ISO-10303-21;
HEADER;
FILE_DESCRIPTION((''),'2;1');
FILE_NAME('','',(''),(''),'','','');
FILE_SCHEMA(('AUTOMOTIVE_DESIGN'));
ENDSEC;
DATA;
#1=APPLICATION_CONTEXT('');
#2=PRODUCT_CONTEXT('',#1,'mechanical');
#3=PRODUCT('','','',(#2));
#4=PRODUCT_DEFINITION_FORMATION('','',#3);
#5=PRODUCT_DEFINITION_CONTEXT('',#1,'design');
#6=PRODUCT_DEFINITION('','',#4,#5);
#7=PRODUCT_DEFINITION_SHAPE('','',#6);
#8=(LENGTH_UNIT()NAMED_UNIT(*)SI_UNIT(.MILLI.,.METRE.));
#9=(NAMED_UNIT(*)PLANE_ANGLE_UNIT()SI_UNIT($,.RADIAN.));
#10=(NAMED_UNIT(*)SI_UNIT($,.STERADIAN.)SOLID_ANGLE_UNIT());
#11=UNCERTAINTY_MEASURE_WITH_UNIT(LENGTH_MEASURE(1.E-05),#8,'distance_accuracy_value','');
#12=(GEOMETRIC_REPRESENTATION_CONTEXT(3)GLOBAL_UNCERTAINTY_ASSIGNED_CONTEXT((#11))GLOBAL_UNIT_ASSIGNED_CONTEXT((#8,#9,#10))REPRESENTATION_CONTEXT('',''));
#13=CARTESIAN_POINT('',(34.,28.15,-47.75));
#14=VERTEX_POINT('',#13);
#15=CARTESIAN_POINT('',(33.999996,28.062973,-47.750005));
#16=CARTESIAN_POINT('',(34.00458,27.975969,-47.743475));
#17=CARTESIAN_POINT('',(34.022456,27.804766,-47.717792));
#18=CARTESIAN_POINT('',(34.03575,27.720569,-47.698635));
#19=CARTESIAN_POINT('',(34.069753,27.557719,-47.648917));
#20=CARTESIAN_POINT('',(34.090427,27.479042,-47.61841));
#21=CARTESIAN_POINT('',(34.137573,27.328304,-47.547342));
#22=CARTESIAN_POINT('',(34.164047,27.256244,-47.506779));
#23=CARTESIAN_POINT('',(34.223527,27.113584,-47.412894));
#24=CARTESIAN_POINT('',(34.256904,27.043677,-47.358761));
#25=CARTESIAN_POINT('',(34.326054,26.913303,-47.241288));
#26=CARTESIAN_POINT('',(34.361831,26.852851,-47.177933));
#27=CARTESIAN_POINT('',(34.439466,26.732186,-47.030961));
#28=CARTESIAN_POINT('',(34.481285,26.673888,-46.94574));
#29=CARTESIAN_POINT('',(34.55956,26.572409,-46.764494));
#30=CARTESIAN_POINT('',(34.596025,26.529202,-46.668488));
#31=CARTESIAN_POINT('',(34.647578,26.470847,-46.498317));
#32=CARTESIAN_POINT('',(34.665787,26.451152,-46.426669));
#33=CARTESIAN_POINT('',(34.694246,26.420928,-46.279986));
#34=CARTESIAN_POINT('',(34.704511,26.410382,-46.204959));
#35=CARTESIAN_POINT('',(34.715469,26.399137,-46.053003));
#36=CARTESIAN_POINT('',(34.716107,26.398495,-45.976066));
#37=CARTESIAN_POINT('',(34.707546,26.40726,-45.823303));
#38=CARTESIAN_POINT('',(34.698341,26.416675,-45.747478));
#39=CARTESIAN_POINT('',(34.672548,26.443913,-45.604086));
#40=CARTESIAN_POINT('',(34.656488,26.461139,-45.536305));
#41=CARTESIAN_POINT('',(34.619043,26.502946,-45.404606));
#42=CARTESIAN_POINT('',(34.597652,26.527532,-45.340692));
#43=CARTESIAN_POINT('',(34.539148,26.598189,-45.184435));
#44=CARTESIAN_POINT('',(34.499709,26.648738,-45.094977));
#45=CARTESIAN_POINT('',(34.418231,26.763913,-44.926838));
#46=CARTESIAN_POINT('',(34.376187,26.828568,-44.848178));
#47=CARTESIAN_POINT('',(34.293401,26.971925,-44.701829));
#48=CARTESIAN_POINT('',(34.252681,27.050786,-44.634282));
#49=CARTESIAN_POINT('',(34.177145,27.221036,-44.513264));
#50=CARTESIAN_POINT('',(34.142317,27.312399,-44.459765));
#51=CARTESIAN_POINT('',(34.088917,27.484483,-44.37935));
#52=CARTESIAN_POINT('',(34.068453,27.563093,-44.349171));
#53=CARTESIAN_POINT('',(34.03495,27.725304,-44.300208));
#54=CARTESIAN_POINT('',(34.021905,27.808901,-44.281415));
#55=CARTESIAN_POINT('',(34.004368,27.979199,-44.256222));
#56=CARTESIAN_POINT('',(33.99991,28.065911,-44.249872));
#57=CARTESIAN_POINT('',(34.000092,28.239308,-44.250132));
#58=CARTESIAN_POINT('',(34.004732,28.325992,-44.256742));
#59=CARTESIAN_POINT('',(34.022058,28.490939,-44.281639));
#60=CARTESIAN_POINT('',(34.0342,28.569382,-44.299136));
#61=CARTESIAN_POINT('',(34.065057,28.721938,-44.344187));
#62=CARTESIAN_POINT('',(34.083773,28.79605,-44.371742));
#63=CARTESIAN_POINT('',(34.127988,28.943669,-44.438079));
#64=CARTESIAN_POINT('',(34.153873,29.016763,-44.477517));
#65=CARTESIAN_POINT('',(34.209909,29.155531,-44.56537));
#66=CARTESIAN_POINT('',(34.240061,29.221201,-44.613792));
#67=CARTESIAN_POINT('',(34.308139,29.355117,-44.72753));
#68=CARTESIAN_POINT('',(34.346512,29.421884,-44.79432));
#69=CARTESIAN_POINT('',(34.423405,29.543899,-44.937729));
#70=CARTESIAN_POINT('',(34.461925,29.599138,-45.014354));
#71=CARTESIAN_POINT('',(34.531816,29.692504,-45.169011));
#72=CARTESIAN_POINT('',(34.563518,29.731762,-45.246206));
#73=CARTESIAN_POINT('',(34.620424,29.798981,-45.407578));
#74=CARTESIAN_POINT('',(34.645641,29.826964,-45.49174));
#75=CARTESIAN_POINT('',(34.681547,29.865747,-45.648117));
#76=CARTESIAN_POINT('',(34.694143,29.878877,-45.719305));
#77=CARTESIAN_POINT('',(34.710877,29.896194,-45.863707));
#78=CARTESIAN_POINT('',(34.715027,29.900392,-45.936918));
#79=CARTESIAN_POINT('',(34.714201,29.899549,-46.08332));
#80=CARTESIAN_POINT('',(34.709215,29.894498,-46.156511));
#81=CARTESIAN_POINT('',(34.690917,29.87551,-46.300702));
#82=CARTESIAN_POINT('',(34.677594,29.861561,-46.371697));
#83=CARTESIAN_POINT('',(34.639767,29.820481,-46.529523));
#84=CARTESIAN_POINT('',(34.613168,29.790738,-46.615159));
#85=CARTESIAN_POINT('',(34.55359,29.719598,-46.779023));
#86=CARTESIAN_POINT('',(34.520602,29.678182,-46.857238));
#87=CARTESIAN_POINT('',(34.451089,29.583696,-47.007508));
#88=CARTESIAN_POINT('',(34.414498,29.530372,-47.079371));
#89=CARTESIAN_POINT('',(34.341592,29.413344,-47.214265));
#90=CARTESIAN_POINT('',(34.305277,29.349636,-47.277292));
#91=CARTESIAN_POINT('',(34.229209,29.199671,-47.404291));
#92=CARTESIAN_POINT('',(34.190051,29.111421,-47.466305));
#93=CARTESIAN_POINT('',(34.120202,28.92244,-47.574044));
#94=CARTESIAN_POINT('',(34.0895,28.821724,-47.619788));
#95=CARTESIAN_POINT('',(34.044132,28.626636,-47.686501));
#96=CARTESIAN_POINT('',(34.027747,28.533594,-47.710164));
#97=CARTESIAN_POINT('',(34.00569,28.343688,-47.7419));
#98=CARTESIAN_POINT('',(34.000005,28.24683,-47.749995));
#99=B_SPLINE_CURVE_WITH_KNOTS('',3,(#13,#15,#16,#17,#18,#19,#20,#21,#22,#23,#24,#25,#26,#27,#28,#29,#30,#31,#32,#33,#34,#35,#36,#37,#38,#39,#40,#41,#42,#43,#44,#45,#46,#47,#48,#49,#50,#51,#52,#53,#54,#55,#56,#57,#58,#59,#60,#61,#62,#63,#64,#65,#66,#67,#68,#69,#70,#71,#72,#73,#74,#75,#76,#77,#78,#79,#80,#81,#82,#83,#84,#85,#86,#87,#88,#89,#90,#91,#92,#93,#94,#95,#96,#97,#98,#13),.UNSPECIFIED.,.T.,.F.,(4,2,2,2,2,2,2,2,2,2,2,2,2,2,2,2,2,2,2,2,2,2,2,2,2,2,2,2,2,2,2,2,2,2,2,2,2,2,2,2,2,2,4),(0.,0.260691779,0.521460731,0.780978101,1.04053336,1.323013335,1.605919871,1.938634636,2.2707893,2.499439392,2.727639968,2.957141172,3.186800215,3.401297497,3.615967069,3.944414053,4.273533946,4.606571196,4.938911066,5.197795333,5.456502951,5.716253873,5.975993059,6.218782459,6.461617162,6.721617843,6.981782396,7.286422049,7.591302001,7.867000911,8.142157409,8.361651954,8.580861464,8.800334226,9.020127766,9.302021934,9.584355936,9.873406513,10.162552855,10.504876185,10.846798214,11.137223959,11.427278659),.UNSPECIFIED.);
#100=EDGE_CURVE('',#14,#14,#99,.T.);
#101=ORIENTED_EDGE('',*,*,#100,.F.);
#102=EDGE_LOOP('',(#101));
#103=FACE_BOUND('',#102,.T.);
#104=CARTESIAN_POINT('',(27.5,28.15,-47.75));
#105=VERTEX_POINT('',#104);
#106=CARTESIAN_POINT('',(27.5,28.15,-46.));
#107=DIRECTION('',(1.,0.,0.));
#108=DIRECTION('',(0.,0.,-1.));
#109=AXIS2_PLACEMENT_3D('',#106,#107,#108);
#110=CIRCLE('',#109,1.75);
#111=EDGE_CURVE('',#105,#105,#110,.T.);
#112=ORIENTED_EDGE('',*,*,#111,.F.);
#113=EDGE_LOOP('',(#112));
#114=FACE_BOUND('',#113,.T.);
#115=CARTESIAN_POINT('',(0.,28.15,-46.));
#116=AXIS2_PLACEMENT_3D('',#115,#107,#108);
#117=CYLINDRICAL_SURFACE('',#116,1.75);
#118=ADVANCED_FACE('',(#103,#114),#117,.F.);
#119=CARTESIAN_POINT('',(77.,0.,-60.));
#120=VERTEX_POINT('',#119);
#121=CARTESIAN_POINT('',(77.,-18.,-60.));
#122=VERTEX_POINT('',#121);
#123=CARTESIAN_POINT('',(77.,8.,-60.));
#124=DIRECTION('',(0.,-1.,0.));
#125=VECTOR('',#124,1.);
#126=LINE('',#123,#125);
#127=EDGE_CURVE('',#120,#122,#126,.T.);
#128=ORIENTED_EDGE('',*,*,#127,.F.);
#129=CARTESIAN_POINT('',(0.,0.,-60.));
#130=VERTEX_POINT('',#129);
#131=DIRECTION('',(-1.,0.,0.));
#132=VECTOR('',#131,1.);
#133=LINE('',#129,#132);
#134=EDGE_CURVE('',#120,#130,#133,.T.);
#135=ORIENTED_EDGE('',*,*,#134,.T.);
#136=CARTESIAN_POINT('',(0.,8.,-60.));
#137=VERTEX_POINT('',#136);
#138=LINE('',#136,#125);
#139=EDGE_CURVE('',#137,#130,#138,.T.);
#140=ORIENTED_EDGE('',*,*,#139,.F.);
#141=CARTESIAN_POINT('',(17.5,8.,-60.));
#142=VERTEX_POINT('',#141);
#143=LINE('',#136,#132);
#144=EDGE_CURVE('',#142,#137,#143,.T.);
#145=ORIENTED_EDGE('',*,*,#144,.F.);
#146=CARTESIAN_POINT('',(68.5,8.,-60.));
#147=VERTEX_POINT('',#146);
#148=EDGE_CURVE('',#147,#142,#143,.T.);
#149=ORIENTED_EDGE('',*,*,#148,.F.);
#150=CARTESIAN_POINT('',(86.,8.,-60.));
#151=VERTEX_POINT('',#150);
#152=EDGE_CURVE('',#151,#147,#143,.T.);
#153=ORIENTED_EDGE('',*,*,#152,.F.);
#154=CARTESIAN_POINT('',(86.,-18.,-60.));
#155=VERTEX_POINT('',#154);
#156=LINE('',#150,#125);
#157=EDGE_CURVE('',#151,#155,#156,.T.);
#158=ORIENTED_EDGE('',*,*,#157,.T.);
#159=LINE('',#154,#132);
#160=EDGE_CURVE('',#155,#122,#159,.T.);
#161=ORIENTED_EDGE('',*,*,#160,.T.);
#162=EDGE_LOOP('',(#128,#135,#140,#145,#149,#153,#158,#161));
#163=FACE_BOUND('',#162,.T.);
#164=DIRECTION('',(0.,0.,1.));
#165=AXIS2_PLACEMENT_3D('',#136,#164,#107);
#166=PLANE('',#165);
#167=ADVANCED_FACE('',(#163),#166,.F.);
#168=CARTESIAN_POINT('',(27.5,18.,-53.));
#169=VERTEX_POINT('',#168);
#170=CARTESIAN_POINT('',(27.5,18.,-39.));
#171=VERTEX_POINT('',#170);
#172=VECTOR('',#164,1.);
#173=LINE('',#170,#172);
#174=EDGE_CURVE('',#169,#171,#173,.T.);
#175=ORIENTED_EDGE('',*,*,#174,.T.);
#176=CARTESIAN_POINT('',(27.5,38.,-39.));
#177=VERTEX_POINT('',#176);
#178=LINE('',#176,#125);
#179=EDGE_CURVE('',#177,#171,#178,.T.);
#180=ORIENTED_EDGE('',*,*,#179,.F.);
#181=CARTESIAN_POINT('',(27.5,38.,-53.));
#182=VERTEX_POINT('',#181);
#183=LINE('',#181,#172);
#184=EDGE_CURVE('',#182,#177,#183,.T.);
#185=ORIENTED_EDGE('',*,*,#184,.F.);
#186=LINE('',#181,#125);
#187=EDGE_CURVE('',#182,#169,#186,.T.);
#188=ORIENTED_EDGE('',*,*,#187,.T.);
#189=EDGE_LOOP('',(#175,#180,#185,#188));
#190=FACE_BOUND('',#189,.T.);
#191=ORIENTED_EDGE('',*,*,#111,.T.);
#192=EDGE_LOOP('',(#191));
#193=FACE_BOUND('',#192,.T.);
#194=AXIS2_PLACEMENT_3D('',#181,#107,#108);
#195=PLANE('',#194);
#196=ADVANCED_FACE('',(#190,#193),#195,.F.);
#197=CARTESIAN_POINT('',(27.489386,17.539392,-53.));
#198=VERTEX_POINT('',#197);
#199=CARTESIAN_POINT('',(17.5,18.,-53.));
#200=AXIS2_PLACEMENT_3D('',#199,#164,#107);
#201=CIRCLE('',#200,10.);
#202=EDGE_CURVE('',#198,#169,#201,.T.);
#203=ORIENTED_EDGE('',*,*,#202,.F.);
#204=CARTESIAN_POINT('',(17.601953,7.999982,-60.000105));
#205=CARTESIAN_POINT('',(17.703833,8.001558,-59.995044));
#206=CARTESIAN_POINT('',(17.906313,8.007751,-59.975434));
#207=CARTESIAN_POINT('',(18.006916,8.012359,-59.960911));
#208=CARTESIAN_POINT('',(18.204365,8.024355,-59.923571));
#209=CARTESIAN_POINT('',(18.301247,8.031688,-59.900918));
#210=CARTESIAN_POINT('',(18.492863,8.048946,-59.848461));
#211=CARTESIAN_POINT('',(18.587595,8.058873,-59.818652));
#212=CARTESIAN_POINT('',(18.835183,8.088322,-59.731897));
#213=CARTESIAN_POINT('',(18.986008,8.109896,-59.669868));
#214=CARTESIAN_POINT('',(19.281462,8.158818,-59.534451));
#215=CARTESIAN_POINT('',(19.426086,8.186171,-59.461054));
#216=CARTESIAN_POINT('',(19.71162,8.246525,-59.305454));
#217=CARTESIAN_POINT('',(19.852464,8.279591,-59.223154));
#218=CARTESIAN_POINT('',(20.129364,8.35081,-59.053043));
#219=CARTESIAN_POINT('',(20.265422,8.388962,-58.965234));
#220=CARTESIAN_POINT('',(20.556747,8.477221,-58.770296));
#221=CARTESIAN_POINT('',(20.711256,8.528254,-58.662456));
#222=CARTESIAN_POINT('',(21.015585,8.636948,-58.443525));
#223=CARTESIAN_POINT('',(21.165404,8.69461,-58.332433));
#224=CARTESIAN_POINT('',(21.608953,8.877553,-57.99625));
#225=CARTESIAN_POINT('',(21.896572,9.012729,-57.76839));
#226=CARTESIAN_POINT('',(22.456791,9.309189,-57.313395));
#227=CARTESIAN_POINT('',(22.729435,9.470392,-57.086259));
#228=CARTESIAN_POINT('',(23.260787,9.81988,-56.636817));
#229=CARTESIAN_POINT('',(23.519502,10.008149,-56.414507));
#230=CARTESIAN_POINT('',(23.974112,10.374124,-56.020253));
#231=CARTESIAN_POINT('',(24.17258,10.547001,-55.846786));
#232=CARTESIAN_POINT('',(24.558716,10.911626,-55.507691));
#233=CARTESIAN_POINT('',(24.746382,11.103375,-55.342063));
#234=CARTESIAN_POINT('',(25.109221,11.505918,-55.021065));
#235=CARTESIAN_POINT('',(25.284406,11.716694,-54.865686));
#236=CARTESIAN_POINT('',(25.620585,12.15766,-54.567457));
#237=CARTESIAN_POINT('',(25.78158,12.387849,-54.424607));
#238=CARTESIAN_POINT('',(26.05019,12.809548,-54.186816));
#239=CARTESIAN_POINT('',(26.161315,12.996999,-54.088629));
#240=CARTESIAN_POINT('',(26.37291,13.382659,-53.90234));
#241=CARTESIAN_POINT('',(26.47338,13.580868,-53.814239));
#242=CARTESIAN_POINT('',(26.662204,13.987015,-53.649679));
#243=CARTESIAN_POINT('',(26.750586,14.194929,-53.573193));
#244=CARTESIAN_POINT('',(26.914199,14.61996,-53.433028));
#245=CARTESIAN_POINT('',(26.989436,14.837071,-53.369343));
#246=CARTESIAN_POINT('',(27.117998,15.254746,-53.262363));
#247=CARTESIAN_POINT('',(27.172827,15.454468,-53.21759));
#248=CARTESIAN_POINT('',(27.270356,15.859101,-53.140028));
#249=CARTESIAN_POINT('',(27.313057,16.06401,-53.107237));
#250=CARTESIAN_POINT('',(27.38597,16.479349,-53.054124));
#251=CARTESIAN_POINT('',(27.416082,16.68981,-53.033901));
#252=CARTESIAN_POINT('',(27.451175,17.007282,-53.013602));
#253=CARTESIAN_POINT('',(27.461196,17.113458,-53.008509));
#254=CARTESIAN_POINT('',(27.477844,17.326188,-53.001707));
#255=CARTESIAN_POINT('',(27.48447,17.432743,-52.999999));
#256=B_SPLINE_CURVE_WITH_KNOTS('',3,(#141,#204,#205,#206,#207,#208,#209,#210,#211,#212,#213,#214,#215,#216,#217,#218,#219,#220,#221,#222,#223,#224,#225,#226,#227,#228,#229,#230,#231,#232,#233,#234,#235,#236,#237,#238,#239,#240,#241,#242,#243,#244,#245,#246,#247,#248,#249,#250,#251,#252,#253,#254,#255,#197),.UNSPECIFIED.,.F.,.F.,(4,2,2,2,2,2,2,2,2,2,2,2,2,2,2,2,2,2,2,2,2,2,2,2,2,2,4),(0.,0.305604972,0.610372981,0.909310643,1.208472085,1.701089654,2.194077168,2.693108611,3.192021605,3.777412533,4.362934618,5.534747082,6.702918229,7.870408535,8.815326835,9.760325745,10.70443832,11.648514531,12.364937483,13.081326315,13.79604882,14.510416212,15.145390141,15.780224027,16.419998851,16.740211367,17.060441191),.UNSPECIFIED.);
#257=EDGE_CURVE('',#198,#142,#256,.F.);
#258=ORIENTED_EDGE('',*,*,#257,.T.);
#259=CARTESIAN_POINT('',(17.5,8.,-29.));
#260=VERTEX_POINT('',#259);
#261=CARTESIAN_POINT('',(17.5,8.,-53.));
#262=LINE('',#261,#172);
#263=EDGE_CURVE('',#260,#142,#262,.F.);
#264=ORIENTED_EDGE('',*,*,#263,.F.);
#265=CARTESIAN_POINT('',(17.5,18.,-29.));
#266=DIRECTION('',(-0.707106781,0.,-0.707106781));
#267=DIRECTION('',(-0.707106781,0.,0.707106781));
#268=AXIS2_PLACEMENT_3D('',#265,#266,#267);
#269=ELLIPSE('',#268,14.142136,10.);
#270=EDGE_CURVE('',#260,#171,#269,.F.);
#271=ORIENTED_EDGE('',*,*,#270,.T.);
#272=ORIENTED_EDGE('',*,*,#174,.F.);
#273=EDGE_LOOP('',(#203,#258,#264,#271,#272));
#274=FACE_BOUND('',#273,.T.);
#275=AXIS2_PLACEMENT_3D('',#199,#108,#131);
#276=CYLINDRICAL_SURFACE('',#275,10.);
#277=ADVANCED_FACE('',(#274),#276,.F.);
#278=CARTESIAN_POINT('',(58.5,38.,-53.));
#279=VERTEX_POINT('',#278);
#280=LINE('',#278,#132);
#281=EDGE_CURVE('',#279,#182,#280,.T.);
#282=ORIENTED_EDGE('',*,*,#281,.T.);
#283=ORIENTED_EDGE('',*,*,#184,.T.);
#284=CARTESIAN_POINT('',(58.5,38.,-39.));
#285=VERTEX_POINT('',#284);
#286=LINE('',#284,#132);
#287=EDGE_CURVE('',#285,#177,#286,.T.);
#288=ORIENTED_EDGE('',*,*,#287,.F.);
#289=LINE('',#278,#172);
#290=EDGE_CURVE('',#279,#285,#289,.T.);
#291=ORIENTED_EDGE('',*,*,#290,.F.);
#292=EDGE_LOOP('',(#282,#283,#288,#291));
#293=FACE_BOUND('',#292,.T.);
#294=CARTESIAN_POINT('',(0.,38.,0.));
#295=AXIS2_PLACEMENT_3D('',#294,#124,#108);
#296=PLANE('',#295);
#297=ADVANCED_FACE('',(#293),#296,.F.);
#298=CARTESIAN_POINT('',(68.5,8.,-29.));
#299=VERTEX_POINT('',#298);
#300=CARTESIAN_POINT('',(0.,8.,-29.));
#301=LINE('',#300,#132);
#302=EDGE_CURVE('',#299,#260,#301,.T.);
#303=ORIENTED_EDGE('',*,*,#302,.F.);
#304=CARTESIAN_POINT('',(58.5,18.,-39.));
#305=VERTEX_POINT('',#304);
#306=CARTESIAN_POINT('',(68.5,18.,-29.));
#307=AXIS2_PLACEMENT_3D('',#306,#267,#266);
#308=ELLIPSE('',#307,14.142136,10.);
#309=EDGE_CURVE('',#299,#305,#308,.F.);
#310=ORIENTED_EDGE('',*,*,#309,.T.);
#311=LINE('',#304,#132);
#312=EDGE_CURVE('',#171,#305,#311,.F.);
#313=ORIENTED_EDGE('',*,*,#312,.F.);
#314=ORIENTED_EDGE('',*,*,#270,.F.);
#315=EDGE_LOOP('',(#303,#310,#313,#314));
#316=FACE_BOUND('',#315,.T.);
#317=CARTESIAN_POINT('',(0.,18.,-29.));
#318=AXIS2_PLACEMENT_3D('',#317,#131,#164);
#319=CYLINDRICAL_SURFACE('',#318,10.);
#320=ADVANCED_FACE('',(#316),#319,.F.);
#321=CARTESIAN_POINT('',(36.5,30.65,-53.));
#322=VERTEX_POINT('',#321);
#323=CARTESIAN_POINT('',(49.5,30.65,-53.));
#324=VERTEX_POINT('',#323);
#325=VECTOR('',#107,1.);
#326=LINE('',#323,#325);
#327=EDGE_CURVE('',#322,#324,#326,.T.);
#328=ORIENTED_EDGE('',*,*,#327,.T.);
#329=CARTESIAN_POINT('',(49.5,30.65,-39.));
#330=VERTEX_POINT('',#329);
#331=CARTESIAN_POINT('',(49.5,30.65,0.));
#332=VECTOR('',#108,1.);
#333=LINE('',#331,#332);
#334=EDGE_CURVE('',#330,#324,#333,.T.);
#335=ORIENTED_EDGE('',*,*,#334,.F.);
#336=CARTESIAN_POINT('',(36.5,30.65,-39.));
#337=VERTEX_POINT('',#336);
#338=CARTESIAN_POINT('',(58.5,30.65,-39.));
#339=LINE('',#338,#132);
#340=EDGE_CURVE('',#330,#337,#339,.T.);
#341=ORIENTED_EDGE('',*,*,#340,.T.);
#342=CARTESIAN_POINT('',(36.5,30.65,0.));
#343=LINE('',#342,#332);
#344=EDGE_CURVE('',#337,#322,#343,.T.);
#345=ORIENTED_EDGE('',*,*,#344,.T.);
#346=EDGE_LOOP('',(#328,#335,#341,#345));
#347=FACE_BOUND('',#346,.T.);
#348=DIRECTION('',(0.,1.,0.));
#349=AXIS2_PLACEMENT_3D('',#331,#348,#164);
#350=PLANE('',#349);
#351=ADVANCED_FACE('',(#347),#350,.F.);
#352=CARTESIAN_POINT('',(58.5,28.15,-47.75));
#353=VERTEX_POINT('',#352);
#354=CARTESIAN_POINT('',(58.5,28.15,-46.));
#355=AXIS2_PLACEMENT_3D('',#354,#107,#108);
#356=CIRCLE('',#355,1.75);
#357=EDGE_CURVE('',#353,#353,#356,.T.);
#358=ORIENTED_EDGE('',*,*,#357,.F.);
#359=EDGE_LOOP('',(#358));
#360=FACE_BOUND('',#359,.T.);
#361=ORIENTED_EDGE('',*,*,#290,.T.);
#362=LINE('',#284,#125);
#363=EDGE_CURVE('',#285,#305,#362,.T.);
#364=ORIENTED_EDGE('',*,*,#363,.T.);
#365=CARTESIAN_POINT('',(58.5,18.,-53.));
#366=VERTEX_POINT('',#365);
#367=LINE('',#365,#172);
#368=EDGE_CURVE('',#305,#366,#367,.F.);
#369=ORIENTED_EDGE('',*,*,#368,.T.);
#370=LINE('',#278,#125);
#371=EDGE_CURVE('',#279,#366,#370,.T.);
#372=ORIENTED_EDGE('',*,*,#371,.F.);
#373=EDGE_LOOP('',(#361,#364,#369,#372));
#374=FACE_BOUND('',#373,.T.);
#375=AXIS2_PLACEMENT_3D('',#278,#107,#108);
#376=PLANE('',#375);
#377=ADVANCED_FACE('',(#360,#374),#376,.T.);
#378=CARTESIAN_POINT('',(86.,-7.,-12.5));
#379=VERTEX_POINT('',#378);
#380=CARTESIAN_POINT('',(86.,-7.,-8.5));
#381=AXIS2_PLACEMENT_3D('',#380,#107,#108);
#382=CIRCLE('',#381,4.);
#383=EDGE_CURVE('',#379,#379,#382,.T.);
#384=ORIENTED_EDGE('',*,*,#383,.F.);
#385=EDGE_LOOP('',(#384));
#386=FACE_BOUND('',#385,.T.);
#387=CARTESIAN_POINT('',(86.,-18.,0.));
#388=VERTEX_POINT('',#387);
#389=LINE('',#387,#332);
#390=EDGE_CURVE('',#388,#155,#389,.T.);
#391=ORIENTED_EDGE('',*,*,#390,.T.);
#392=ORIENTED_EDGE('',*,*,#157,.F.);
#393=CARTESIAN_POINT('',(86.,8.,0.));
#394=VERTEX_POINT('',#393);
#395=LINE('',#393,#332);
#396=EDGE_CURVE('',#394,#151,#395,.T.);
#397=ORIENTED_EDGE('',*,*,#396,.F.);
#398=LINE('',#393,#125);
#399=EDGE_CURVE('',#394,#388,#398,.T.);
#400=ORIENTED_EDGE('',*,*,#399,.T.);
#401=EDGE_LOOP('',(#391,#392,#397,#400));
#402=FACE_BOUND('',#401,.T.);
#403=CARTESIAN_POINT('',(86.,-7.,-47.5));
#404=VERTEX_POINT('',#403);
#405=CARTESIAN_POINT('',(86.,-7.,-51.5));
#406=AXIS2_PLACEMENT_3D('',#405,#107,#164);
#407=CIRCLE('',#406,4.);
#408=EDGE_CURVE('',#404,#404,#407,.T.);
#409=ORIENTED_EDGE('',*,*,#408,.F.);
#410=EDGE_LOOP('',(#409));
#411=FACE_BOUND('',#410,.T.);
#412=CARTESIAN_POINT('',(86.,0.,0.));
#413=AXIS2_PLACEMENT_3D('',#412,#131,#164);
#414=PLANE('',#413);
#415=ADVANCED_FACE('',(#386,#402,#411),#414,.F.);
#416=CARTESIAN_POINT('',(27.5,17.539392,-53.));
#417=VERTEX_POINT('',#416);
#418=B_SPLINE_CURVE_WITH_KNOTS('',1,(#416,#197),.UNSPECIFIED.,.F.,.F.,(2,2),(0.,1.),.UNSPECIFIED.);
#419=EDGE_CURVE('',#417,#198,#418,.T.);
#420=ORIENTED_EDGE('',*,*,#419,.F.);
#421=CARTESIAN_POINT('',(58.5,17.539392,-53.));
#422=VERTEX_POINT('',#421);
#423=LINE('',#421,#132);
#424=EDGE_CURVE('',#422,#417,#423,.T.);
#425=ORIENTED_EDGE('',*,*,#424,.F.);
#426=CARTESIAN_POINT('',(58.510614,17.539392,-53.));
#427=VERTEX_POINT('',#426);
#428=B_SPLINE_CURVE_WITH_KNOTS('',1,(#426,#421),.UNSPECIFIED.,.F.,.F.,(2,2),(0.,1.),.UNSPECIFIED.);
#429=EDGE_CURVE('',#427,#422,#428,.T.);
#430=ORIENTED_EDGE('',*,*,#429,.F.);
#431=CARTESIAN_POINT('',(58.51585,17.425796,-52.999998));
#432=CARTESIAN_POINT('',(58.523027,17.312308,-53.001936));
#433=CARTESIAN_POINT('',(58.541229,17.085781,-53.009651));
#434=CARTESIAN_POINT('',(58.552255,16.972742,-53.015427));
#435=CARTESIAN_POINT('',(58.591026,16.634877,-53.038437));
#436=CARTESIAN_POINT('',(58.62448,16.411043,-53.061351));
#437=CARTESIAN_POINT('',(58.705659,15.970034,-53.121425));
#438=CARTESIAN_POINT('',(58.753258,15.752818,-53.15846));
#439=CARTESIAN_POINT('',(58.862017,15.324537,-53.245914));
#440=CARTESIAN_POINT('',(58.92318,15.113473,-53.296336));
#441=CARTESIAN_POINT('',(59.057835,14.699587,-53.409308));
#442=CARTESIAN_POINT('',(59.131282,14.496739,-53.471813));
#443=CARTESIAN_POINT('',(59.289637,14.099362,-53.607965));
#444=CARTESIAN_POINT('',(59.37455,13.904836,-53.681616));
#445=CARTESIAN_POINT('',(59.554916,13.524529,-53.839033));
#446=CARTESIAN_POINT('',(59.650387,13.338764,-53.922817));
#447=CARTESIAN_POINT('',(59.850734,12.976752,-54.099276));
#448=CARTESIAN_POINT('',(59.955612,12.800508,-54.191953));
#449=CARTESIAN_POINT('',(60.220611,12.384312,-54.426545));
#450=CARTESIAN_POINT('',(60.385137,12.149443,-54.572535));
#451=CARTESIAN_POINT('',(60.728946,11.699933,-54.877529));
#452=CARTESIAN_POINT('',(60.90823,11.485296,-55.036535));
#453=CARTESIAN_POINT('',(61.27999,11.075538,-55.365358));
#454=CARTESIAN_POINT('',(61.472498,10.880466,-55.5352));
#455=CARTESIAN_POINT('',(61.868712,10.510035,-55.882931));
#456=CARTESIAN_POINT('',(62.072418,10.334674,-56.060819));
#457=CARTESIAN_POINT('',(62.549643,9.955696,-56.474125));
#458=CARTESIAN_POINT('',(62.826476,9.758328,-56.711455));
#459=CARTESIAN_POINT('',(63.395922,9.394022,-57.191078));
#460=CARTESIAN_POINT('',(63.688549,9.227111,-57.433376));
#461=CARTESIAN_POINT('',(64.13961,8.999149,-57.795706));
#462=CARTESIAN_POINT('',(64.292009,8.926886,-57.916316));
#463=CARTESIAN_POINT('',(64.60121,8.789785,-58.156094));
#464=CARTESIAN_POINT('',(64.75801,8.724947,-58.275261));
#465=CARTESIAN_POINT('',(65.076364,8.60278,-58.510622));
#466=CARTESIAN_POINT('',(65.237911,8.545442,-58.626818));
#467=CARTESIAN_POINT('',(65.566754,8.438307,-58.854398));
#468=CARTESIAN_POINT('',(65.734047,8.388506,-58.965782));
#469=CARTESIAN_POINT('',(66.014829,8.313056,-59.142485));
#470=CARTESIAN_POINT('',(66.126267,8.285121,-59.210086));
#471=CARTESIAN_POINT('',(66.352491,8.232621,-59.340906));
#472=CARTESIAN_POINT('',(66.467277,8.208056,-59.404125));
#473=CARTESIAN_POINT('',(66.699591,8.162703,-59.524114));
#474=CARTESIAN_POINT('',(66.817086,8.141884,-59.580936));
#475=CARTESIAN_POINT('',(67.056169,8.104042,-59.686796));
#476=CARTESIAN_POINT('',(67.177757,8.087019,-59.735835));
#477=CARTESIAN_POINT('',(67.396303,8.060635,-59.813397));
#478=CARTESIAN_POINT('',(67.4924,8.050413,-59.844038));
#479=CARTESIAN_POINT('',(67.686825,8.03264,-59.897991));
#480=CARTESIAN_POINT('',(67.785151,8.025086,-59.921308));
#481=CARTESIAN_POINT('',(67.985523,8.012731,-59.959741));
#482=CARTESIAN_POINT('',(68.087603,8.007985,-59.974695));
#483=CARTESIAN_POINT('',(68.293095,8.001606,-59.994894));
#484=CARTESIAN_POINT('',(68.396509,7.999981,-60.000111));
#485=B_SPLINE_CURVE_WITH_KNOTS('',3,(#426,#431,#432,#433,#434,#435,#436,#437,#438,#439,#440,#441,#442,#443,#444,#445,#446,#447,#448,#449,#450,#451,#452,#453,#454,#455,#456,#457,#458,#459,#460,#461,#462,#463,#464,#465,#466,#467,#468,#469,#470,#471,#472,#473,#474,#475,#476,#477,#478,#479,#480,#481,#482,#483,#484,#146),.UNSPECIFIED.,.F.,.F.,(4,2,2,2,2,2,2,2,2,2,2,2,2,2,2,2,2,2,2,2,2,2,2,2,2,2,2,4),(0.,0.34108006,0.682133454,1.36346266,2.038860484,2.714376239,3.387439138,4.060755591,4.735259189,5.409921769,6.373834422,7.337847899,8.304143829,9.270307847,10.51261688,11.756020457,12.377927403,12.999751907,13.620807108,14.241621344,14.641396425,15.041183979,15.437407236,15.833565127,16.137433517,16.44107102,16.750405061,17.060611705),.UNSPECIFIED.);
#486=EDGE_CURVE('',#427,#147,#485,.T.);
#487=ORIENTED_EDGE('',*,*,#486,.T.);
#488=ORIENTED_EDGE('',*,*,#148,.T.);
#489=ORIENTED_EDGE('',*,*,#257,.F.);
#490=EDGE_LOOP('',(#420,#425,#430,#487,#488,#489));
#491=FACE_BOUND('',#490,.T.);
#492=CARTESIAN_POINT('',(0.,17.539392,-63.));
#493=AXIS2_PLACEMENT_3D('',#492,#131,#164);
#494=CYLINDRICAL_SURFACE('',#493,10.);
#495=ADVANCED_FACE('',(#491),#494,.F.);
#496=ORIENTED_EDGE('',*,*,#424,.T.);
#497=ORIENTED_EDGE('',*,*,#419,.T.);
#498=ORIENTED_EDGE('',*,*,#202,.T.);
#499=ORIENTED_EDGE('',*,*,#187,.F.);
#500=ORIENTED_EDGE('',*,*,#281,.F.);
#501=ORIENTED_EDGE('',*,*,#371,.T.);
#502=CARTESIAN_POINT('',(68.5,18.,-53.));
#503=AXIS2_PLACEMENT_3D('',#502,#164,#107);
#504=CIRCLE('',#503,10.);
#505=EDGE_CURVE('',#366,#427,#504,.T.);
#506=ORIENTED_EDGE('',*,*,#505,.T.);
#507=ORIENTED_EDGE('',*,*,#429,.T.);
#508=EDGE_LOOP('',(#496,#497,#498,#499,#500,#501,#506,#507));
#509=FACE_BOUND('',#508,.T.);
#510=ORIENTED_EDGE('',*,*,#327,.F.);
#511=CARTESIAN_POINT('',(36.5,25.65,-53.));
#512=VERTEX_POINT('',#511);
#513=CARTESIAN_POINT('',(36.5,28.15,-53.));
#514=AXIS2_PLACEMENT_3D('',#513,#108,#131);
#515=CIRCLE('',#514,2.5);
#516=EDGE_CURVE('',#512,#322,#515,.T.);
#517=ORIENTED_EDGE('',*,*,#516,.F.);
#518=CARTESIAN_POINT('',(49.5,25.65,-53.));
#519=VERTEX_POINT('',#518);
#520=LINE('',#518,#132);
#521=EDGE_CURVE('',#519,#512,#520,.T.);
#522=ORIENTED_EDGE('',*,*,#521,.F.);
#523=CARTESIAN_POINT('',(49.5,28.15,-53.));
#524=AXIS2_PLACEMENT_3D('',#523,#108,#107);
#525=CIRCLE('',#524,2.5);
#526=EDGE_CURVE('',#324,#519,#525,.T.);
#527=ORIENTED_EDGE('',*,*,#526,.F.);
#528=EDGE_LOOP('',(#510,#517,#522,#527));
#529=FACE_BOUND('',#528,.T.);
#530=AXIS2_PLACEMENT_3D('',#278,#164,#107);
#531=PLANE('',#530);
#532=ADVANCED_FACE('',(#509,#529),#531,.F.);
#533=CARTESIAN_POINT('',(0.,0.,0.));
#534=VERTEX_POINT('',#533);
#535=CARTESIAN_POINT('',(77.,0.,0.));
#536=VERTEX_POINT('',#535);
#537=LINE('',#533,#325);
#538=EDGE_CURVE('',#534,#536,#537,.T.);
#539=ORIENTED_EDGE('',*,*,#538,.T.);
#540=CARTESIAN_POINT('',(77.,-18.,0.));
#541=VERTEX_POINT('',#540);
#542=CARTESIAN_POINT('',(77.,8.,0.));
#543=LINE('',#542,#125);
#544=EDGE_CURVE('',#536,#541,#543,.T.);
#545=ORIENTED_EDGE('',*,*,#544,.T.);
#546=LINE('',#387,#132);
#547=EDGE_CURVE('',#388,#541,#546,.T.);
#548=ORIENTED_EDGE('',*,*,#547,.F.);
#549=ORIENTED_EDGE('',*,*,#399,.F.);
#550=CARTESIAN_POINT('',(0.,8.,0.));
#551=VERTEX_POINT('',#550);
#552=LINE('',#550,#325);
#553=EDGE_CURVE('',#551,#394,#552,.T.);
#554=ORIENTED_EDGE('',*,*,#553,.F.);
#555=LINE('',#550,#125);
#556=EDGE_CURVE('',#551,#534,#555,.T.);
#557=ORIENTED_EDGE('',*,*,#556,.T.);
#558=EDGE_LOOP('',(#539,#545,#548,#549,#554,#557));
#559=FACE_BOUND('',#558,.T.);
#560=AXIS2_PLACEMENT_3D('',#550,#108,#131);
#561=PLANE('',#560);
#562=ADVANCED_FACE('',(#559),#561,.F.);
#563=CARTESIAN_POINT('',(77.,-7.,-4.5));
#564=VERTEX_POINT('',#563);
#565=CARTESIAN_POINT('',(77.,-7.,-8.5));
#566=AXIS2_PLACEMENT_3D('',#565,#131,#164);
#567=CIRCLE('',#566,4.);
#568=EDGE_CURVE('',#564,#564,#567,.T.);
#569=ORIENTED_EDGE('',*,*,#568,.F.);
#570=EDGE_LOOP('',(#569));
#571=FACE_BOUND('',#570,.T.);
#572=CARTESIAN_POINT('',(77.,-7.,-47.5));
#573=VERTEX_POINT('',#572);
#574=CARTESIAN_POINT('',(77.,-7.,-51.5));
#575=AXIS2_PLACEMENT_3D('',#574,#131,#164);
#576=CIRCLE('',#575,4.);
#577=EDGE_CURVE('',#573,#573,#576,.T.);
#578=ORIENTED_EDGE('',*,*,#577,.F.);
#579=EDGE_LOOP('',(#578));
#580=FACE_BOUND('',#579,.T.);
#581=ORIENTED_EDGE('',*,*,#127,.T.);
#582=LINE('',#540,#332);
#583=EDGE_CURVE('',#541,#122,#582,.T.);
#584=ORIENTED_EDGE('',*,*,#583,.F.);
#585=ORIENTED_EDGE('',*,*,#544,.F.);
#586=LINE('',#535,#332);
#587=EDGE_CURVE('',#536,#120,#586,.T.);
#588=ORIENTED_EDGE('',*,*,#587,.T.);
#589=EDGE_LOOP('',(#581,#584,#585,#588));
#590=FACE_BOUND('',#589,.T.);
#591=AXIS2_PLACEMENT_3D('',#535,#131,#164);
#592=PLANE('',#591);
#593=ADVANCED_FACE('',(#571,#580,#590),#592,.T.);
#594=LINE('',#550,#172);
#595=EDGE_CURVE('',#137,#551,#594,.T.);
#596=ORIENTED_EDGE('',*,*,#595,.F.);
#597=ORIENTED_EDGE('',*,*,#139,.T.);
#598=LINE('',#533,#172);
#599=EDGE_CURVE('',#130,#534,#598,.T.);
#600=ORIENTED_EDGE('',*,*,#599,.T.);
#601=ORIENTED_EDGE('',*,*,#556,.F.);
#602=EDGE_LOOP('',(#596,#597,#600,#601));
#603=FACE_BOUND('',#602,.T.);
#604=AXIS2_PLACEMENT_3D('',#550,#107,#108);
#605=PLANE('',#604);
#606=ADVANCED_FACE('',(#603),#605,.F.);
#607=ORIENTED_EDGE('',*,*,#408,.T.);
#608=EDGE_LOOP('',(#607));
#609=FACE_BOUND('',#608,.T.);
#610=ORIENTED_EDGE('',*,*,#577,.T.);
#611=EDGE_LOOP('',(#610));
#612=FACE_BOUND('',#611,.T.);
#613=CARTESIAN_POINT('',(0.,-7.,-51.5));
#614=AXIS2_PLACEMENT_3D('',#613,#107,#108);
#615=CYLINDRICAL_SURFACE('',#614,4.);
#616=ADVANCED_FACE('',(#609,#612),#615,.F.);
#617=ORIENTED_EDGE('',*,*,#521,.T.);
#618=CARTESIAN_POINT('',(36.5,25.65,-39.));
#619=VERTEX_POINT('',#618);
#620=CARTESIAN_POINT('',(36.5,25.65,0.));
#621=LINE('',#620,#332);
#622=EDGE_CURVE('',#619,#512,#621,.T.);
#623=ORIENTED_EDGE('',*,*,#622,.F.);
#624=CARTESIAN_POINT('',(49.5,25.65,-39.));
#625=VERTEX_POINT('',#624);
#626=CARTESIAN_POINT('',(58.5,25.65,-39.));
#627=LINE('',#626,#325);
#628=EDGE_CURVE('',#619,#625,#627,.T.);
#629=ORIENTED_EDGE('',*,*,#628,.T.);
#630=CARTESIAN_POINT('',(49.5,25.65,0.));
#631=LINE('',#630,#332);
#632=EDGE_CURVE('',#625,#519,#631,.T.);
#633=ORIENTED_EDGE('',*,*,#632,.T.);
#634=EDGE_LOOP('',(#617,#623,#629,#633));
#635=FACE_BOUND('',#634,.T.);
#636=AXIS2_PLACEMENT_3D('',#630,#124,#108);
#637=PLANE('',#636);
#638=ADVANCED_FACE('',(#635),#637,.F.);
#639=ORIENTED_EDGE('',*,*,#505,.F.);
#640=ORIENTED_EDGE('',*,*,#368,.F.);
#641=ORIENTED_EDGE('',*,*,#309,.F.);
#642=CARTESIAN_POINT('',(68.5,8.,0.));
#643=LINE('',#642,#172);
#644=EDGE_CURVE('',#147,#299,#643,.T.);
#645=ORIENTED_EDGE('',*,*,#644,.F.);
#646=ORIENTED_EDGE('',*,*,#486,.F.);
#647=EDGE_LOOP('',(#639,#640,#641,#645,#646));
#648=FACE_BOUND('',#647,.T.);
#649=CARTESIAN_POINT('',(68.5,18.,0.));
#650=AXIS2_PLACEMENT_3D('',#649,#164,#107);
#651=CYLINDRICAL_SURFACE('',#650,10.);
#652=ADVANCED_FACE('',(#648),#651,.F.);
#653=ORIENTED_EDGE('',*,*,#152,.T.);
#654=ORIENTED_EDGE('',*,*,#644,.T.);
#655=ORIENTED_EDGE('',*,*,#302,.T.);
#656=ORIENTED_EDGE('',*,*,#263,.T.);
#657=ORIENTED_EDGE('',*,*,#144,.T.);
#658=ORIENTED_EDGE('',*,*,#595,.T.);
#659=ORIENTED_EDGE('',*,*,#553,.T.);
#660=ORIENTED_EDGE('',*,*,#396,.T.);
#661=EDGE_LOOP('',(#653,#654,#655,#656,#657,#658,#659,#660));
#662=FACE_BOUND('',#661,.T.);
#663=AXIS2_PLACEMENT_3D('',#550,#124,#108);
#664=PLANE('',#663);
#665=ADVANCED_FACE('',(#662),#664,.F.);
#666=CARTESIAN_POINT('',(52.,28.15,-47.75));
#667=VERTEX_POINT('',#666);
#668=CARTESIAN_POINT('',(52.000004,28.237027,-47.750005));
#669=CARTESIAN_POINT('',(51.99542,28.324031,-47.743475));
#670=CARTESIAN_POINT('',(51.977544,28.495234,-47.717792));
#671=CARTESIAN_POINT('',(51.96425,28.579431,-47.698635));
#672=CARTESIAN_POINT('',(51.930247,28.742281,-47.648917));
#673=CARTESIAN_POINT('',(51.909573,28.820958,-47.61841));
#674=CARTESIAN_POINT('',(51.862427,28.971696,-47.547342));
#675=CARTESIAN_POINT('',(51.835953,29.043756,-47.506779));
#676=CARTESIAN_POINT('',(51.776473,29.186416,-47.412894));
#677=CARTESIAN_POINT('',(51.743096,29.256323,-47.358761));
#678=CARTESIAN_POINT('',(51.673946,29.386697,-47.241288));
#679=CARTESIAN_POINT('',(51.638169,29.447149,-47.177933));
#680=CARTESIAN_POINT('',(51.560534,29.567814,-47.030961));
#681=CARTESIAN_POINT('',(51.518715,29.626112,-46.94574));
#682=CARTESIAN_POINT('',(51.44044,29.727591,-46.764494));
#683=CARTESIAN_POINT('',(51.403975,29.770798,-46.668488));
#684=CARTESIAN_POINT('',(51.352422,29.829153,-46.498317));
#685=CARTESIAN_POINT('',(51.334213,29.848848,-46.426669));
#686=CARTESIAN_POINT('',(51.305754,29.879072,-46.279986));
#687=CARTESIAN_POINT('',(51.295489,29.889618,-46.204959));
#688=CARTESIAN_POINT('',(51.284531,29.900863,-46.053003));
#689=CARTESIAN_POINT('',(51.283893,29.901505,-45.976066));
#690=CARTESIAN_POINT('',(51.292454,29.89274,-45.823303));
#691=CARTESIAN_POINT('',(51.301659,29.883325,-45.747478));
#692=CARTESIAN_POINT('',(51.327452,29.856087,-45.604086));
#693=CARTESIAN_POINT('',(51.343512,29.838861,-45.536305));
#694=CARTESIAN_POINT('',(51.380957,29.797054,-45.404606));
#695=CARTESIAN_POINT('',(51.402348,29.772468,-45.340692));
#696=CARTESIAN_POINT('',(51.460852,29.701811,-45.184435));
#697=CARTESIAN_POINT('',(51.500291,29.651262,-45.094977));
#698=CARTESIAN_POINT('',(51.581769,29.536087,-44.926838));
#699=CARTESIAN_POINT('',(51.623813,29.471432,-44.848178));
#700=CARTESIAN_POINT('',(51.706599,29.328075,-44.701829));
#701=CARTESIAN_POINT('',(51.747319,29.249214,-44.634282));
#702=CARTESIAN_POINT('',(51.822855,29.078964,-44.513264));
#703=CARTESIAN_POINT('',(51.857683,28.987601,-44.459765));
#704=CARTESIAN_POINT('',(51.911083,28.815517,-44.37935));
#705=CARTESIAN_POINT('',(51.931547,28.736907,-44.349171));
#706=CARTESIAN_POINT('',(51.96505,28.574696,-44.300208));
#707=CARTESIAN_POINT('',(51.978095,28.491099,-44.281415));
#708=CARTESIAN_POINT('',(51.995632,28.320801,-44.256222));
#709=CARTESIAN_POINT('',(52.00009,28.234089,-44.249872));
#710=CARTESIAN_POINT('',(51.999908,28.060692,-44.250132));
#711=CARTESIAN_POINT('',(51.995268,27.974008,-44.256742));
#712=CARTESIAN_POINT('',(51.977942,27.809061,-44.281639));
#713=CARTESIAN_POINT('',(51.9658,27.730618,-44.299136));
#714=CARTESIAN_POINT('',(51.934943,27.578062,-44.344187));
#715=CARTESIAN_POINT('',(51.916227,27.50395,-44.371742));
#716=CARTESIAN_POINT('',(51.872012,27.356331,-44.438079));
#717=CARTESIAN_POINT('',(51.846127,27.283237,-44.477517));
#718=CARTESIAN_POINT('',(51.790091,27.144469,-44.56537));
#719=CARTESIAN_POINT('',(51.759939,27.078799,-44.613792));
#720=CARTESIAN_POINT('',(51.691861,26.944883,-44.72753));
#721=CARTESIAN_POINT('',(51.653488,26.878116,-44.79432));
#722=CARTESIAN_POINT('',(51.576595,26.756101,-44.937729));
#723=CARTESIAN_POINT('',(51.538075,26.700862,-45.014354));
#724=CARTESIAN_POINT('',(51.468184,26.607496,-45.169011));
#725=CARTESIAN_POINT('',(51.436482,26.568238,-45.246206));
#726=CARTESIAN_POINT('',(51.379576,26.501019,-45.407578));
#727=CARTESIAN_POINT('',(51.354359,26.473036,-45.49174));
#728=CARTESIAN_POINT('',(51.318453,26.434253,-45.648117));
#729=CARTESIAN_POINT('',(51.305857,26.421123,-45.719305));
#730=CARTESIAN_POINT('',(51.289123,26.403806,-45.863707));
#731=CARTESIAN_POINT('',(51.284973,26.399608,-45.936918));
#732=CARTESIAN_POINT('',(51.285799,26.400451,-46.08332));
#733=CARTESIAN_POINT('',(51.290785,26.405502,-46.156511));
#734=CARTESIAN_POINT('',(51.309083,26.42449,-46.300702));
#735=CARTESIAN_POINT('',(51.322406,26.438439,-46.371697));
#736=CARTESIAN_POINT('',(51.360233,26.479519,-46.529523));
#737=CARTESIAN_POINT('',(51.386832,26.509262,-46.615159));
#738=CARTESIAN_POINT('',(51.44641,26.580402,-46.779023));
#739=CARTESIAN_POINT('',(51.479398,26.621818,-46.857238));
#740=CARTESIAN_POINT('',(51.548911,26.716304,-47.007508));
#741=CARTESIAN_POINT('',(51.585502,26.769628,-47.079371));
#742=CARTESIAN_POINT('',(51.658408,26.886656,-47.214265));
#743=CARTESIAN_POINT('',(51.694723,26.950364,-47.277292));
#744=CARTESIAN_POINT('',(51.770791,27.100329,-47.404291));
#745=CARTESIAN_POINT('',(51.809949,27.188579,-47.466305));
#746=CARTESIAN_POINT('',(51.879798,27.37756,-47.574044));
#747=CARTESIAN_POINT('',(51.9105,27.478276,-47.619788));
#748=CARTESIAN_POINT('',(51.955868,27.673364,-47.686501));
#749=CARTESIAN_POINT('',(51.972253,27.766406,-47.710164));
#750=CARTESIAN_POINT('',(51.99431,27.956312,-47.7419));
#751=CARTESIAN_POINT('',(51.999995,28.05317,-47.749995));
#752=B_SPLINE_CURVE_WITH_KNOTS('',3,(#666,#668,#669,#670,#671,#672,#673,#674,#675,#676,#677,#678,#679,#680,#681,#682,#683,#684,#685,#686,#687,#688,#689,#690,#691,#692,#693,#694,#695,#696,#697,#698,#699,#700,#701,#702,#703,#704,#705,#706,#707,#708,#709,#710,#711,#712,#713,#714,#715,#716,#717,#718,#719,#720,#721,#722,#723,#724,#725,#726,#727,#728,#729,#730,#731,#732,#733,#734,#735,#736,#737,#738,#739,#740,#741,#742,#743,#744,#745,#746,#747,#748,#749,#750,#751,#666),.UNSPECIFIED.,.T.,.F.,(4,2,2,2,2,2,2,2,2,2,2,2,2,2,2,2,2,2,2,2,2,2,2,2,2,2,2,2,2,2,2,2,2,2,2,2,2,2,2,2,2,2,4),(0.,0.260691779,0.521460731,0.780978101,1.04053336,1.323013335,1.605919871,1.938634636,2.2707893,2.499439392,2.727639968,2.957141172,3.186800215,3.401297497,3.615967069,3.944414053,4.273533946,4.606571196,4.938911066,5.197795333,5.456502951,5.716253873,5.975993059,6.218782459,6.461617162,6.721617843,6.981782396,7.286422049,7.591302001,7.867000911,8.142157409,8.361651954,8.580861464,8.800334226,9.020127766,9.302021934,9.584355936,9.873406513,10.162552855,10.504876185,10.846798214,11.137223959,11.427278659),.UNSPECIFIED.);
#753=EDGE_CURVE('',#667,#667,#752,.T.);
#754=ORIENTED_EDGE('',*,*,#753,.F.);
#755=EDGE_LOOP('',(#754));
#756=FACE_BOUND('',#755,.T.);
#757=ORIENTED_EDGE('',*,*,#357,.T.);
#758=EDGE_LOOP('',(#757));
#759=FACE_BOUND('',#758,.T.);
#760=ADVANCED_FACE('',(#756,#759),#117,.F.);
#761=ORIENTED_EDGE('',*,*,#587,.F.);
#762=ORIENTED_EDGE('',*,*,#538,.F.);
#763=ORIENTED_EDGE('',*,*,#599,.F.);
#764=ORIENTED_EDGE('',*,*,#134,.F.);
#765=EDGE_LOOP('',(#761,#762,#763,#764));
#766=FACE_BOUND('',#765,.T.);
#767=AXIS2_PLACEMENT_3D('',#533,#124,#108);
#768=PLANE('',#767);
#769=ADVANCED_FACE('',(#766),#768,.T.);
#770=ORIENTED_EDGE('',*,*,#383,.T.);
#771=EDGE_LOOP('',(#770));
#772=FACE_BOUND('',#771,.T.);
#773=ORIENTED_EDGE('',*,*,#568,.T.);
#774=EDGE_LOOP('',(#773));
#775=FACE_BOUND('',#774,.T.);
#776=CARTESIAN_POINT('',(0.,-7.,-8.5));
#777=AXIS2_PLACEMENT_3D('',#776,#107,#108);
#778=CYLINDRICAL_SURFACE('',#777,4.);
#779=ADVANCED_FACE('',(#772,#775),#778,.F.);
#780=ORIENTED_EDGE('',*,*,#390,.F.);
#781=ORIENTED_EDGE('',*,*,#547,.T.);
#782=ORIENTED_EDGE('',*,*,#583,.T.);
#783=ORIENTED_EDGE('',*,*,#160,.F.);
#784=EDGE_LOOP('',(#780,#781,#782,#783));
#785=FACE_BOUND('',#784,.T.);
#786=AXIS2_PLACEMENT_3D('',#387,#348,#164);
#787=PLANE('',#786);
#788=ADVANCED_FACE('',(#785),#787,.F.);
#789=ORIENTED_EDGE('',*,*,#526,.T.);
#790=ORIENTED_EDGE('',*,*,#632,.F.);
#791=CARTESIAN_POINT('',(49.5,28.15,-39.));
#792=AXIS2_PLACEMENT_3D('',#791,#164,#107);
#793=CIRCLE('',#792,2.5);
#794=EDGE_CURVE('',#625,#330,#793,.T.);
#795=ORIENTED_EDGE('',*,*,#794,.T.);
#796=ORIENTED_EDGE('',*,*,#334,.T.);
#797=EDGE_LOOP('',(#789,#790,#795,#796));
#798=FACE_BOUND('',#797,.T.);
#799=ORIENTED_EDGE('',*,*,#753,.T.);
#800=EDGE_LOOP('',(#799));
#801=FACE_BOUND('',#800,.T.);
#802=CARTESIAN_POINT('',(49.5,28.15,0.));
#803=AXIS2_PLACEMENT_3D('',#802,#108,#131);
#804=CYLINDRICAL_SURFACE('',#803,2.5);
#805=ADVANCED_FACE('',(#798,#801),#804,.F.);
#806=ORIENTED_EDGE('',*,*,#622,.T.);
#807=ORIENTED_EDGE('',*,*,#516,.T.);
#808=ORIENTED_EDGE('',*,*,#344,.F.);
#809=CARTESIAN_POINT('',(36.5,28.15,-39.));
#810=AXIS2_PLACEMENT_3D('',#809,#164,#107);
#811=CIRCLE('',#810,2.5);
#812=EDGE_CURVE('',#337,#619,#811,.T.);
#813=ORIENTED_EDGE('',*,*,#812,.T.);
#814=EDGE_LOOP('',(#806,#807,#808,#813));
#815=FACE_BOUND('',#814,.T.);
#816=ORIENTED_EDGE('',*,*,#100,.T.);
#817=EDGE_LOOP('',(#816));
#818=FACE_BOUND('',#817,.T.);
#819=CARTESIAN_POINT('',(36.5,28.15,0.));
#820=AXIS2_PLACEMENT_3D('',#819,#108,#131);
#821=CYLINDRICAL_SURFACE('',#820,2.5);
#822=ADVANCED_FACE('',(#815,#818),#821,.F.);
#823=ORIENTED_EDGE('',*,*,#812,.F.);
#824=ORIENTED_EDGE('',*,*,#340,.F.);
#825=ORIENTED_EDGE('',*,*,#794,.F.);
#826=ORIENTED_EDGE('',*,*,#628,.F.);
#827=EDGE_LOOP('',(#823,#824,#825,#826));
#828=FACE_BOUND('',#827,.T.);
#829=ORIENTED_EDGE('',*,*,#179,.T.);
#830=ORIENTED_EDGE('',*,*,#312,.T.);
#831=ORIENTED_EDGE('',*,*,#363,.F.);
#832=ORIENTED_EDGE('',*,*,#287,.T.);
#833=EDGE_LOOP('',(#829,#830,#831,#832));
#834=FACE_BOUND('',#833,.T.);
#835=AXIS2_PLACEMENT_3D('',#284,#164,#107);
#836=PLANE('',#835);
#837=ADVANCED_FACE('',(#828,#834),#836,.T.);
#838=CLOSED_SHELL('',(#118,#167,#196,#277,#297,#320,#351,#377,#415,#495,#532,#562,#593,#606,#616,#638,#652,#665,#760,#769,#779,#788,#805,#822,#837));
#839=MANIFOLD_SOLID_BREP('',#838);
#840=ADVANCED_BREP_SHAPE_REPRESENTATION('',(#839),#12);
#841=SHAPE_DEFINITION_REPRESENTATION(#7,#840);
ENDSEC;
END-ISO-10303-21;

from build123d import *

# Parameters (mm, degrees)
SKETCH1_W                               = 77
SKETCH1_H                               = 60
BOSS_EXTRUDE1_DEPTH                     = 8
SKETCH3_W                               = 60
SKETCH3_H                               = 26
BOSS_EXTRUDE2_DEPTH                     = 9
SKETCH4_R                               = 4
CUT_EXTRUDE2_DEPTH                      = 107.395488626
SKETCH5_W                               = 31
SKETCH5_H                               = 14
BOSS_EXTRUDE3_DEPTH                     = 30
CUT_EXTRUDE3_DEPTH                      = 108.930533215
FILLET1_R                               = 10
SKETCH8_R                               = 1.75
F_3_5MM_SCREW_HOLE_FOR_TENSIONING_DEPTH = 93.012227514


with BuildPart() as part:
    # Sketch1 → Boss-Extrude1 (new body)
    with BuildSketch(Plane(origin=(0, 0, 0), x_dir=(1, 0, 0), z_dir=(0, 1, 0))):
        with Locations((38.5, 30)):
            Rectangle(SKETCH1_W, SKETCH1_H)
    extrude(amount=BOSS_EXTRUDE1_DEPTH)

    # Sketch3 → Boss-Extrude2 (add)
    with BuildSketch(Plane(origin=(77, 0, 0), x_dir=(0, 0, -1), z_dir=(1, 0, 0))):
        with Locations((30, -5)):
            Rectangle(SKETCH3_W, SKETCH3_H)
    extrude(amount=BOSS_EXTRUDE2_DEPTH)

    # Sketch4 → Cut-Extrude2 (cut, through all)
    with BuildSketch(Plane(origin=(86, 0, 0), x_dir=(0, 0, -1), z_dir=(1, 0, 0))):
        with Locations((8.5, -7)):
            Circle(SKETCH4_R)
        with Locations(Location((51.5, -7, 0), (0, 0, 180))):
            Circle(SKETCH4_R)
    extrude(amount=-CUT_EXTRUDE2_DEPTH, mode=Mode.SUBTRACT)

    # Sketch5 → Boss-Extrude3 (add)
    with BuildSketch(Plane(origin=(0, 8, 0), x_dir=(1, 0, 0), z_dir=(0, 1, 0))):
        with Locations((43, 46)):
            Rectangle(SKETCH5_W, SKETCH5_H)
    extrude(amount=BOSS_EXTRUDE3_DEPTH)

    # Sketch6 → Cut-Extrude3 (cut, through all)
    with BuildSketch(Plane(origin=(0, 0, -53), x_dir=(-1, 0, 0), z_dir=(0, 0, -1))):
        with BuildLine():
            Line((-49.500000097, 30.65), (-36.499999903, 30.65))
            ThreePointArc((-36.499999903, 30.65), (-33.999999903, 28.15), (-36.499999903, 25.65))
            Line((-36.499999903, 25.65), (-49.500000097, 25.65))
            ThreePointArc((-49.500000097, 25.65), (-52.000000097, 28.15), (-49.500000097, 30.65))
        make_face()
    extrude(amount=-CUT_EXTRUDE3_DEPTH, mode=Mode.SUBTRACT)

    # Fillet1
    # the kernel refuses this fillet: 10 mm, written as the material it adds along each edge
    with BuildSketch(Plane(origin=(58.5, 8, -53), x_dir=(0, 0, -1), z_dir=(-1, 0, 0))) as fillet1_piece_1:
        with BuildLine():
            CenterArc((10, -9.539392014), FILLET1_R, 107.457603124, 72.542396876)
            Line((0, -9.539392014), (-0.2, -9.539392014))
            Line((-0.2, -9.539392014), (-0.2, 0))
            Line((-0.2, 0), (0, 0.2))
            ThreePointArc((0, 0.2), (3.5, 0.2), (6.94, 0.19078784))
            Line((6.94, 0.19078784), (7, 0))
        make_face()
    extrude(amount=31)
    with BuildSketch(Plane(origin=(27.5, 8, -53), x_dir=(-1, 0, 0), z_dir=(0, 0, 1)), Plane(origin=(58.5, 8, -39), x_dir=(1, 0, 0), z_dir=(0, 0, -1))) as fillet1_piece_2:
        with BuildLine():
            CenterArc((FILLET1_R, -FILLET1_R), FILLET1_R, 90, 90)
            Line((0, -FILLET1_R), (-FILLET1_R * 0.02, -FILLET1_R))
            Line((-FILLET1_R * 0.02, -FILLET1_R), (-FILLET1_R * 0.02, FILLET1_R * 0.02))
            Line((-FILLET1_R * 0.02, FILLET1_R * 0.02), (FILLET1_R, FILLET1_R * 0.02))
            Line((FILLET1_R, FILLET1_R * 0.02), (FILLET1_R, 0))
        make_face()
    extrude(amount=14)
    with BuildSketch(Plane(origin=(27.5, 8, -39), x_dir=(0, 0, 1), z_dir=(1, 0, 0))) as fillet1_piece_3:
        with BuildLine():
            CenterArc((FILLET1_R, -FILLET1_R), FILLET1_R, 90, 90)
            Line((0, -FILLET1_R), (-FILLET1_R * 0.02, -FILLET1_R))
            Line((-FILLET1_R * 0.02, -FILLET1_R), (-FILLET1_R * 0.02, FILLET1_R * 0.02))
            Line((-FILLET1_R * 0.02, FILLET1_R * 0.02), (FILLET1_R, FILLET1_R * 0.02))
            Line((FILLET1_R, FILLET1_R * 0.02), (FILLET1_R, 0))
        make_face()
    extrude(amount=31)
    with BuildSketch(Plane(origin=(82.348480035, 8, -53), x_dir=(0, 0, -1), z_dir=(-1, 0, 0))) as fillet1_piece_4a_section:
        with BuildLine():
            CenterArc((10, -9.539392014), FILLET1_R, 107.457603124, 72.542396876)
            Line((0, -9.539392014), (-0.2, -9.539392014))
            Line((-0.2, -9.539392014), (-0.2, 0))
            Line((-0.2, 0), (0, 0.2))
            ThreePointArc((0, 0.2), (3.5, 0.2), (6.94, 0.19078784))
            Line((6.94, 0.19078784), (7, 0))
        make_face()
    fillet1_piece_4a = extrude(amount=54.848480035, mode=Mode.PRIVATE)
    fillet1_piece_4a = split(fillet1_piece_4a, bisect_by=Plane(origin=(58.5, 10.271225878, -54.787817996), z_dir=(1, 0, 0)), keep=Keep.TOP, mode=Mode.PRIVATE)
    with BuildSketch(Plane(origin=(58.5, 8, -39), x_dir=(1, 0, 0), z_dir=(0, 0, -1))) as fillet1_piece_4b_section:
        with BuildLine():
            CenterArc((FILLET1_R, -FILLET1_R), FILLET1_R, 90, 90)
            Line((0, -FILLET1_R), (-FILLET1_R * 0.02, -FILLET1_R))
            Line((-FILLET1_R * 0.02, -FILLET1_R), (-FILLET1_R * 0.02, FILLET1_R * 0.02))
            Line((-FILLET1_R * 0.02, FILLET1_R * 0.02), (FILLET1_R, FILLET1_R * 0.02))
            Line((FILLET1_R, FILLET1_R * 0.02), (FILLET1_R, 0))
        make_face()
    fillet1_piece_4b = extrude(amount=39, mode=Mode.PRIVATE)
    fillet1_piece_4b = split(fillet1_piece_4b, bisect_by=Plane(origin=(60.763951143, 10.263951143, -60), z_dir=(0, 0, 1)), keep=Keep.TOP, mode=Mode.PRIVATE)
    fillet1_piece_4b = split(fillet1_piece_4b, bisect_by=Plane(origin=(60.763951143, 10.263951143, -53), z_dir=(0, 0, -1)), keep=Keep.TOP, mode=Mode.PRIVATE)
    fillet1_piece_4 = fillet1_piece_4a & fillet1_piece_4b
    add(fillet1_piece_4)
    with BuildSketch(Plane(origin=(58.5, 8, -53), x_dir=(0, 0, -1), z_dir=(-1, 0, 0))) as fillet1_piece_5a_section:
        with BuildLine():
            CenterArc((10, -9.539392014), FILLET1_R, 107.457603124, 72.542396876)
            Line((0, -9.539392014), (-0.2, -9.539392014))
            Line((-0.2, -9.539392014), (-0.2, 0))
            Line((-0.2, 0), (0, 0.2))
            ThreePointArc((0, 0.2), (3.5, 0.2), (6.94, 0.19078784))
            Line((6.94, 0.19078784), (7, 0))
        make_face()
    fillet1_piece_5a = extrude(amount=54.848480035, mode=Mode.PRIVATE)
    fillet1_piece_5a = split(fillet1_piece_5a, bisect_by=Plane(origin=(27.5, 10.271225878, -54.787817996), z_dir=(-1, 0, 0)), keep=Keep.TOP, mode=Mode.PRIVATE)
    with BuildSketch(Plane(origin=(27.5, 8, -78), x_dir=(-1, 0, 0), z_dir=(0, 0, 1))) as fillet1_piece_5b_section:
        with BuildLine():
            CenterArc((FILLET1_R, -FILLET1_R), FILLET1_R, 90, 90)
            Line((0, -FILLET1_R), (-FILLET1_R * 0.02, -FILLET1_R))
            Line((-FILLET1_R * 0.02, -FILLET1_R), (-FILLET1_R * 0.02, FILLET1_R * 0.02))
            Line((-FILLET1_R * 0.02, FILLET1_R * 0.02), (FILLET1_R, FILLET1_R * 0.02))
            Line((FILLET1_R, FILLET1_R * 0.02), (FILLET1_R, 0))
        make_face()
    fillet1_piece_5b = extrude(amount=39, mode=Mode.PRIVATE)
    fillet1_piece_5b = split(fillet1_piece_5b, bisect_by=Plane(origin=(25.236048857, 10.263951143, -60), z_dir=(0, 0, 1)), keep=Keep.TOP, mode=Mode.PRIVATE)
    fillet1_piece_5b = split(fillet1_piece_5b, bisect_by=Plane(origin=(25.236048857, 10.263951143, -53), z_dir=(0, 0, -1)), keep=Keep.TOP, mode=Mode.PRIVATE)
    fillet1_piece_5 = fillet1_piece_5a & fillet1_piece_5b
    add(fillet1_piece_5)
    with BuildSketch(Plane(origin=(27.5, 8, -53), x_dir=(-1, 0, 0), z_dir=(0, 0, 1))) as fillet1_piece_6a_section:
        with BuildLine():
            CenterArc((FILLET1_R, -FILLET1_R), FILLET1_R, 90, 90)
            Line((0, -FILLET1_R), (-FILLET1_R * 0.02, -FILLET1_R))
            Line((-FILLET1_R * 0.02, -FILLET1_R), (-FILLET1_R * 0.02, FILLET1_R * 0.02))
            Line((-FILLET1_R * 0.02, FILLET1_R * 0.02), (FILLET1_R, FILLET1_R * 0.02))
            Line((FILLET1_R, FILLET1_R * 0.02), (FILLET1_R, 0))
        make_face()
    fillet1_piece_6a = extrude(amount=39, mode=Mode.PRIVATE)
    fillet1_piece_6a = split(fillet1_piece_6a, bisect_by=Plane(origin=(25.236048857, 10.263951143, -39), z_dir=(0, 0, 1)), keep=Keep.TOP, mode=Mode.PRIVATE)
    with BuildSketch(Plane(origin=(2.5, 8, -39), x_dir=(0, 0, 1), z_dir=(1, 0, 0))) as fillet1_piece_6b_section:
        with BuildLine():
            CenterArc((FILLET1_R, -FILLET1_R), FILLET1_R, 90, 90)
            Line((0, -FILLET1_R), (-FILLET1_R * 0.02, -FILLET1_R))
            Line((-FILLET1_R * 0.02, -FILLET1_R), (-FILLET1_R * 0.02, FILLET1_R * 0.02))
            Line((-FILLET1_R * 0.02, FILLET1_R * 0.02), (FILLET1_R, FILLET1_R * 0.02))
            Line((FILLET1_R, FILLET1_R * 0.02), (FILLET1_R, 0))
        make_face()
    fillet1_piece_6b = extrude(amount=56, mode=Mode.PRIVATE)
    fillet1_piece_6b = split(fillet1_piece_6b, bisect_by=Plane(origin=(27.5, 10.263951143, -36.736048857), z_dir=(-1, 0, 0)), keep=Keep.TOP, mode=Mode.PRIVATE)
    fillet1_piece_6 = fillet1_piece_6a & fillet1_piece_6b
    add(fillet1_piece_6)
    with BuildSketch(Plane(origin=(27.5, 8, -39), x_dir=(0, 0, 1), z_dir=(1, 0, 0))) as fillet1_piece_7a_section:
        with BuildLine():
            CenterArc((FILLET1_R, -FILLET1_R), FILLET1_R, 90, 90)
            Line((0, -FILLET1_R), (-FILLET1_R * 0.02, -FILLET1_R))
            Line((-FILLET1_R * 0.02, -FILLET1_R), (-FILLET1_R * 0.02, FILLET1_R * 0.02))
            Line((-FILLET1_R * 0.02, FILLET1_R * 0.02), (FILLET1_R, FILLET1_R * 0.02))
            Line((FILLET1_R, FILLET1_R * 0.02), (FILLET1_R, 0))
        make_face()
    fillet1_piece_7a = extrude(amount=56, mode=Mode.PRIVATE)
    fillet1_piece_7a = split(fillet1_piece_7a, bisect_by=Plane(origin=(58.5, 10.263951143, -36.736048857), z_dir=(1, 0, 0)), keep=Keep.TOP, mode=Mode.PRIVATE)
    with BuildSketch(Plane(origin=(58.5, 8, -14), x_dir=(1, 0, 0), z_dir=(0, 0, -1))) as fillet1_piece_7b_section:
        with BuildLine():
            CenterArc((FILLET1_R, -FILLET1_R), FILLET1_R, 90, 90)
            Line((0, -FILLET1_R), (-FILLET1_R * 0.02, -FILLET1_R))
            Line((-FILLET1_R * 0.02, -FILLET1_R), (-FILLET1_R * 0.02, FILLET1_R * 0.02))
            Line((-FILLET1_R * 0.02, FILLET1_R * 0.02), (FILLET1_R, FILLET1_R * 0.02))
            Line((FILLET1_R, FILLET1_R * 0.02), (FILLET1_R, 0))
        make_face()
    fillet1_piece_7b = extrude(amount=39, mode=Mode.PRIVATE)
    fillet1_piece_7b = split(fillet1_piece_7b, bisect_by=Plane(origin=(60.763951143, 10.263951143, -39), z_dir=(0, 0, 1)), keep=Keep.TOP, mode=Mode.PRIVATE)
    fillet1_piece_7 = fillet1_piece_7a & fillet1_piece_7b
    add(fillet1_piece_7)

    # Sketch8 → 3.5mm screw hole for tensioning (cut, through all)
    with BuildSketch(Plane(origin=(58.5, 0, 0), x_dir=(0, 0, -1), z_dir=(1, 0, 0))):
        with Locations((46, 28.15)):
            Circle(SKETCH8_R)
    extrude(amount=-F_3_5MM_SCREW_HOLE_FOR_TENSIONING_DEPTH, mode=Mode.SUBTRACT)


solid = part.part
